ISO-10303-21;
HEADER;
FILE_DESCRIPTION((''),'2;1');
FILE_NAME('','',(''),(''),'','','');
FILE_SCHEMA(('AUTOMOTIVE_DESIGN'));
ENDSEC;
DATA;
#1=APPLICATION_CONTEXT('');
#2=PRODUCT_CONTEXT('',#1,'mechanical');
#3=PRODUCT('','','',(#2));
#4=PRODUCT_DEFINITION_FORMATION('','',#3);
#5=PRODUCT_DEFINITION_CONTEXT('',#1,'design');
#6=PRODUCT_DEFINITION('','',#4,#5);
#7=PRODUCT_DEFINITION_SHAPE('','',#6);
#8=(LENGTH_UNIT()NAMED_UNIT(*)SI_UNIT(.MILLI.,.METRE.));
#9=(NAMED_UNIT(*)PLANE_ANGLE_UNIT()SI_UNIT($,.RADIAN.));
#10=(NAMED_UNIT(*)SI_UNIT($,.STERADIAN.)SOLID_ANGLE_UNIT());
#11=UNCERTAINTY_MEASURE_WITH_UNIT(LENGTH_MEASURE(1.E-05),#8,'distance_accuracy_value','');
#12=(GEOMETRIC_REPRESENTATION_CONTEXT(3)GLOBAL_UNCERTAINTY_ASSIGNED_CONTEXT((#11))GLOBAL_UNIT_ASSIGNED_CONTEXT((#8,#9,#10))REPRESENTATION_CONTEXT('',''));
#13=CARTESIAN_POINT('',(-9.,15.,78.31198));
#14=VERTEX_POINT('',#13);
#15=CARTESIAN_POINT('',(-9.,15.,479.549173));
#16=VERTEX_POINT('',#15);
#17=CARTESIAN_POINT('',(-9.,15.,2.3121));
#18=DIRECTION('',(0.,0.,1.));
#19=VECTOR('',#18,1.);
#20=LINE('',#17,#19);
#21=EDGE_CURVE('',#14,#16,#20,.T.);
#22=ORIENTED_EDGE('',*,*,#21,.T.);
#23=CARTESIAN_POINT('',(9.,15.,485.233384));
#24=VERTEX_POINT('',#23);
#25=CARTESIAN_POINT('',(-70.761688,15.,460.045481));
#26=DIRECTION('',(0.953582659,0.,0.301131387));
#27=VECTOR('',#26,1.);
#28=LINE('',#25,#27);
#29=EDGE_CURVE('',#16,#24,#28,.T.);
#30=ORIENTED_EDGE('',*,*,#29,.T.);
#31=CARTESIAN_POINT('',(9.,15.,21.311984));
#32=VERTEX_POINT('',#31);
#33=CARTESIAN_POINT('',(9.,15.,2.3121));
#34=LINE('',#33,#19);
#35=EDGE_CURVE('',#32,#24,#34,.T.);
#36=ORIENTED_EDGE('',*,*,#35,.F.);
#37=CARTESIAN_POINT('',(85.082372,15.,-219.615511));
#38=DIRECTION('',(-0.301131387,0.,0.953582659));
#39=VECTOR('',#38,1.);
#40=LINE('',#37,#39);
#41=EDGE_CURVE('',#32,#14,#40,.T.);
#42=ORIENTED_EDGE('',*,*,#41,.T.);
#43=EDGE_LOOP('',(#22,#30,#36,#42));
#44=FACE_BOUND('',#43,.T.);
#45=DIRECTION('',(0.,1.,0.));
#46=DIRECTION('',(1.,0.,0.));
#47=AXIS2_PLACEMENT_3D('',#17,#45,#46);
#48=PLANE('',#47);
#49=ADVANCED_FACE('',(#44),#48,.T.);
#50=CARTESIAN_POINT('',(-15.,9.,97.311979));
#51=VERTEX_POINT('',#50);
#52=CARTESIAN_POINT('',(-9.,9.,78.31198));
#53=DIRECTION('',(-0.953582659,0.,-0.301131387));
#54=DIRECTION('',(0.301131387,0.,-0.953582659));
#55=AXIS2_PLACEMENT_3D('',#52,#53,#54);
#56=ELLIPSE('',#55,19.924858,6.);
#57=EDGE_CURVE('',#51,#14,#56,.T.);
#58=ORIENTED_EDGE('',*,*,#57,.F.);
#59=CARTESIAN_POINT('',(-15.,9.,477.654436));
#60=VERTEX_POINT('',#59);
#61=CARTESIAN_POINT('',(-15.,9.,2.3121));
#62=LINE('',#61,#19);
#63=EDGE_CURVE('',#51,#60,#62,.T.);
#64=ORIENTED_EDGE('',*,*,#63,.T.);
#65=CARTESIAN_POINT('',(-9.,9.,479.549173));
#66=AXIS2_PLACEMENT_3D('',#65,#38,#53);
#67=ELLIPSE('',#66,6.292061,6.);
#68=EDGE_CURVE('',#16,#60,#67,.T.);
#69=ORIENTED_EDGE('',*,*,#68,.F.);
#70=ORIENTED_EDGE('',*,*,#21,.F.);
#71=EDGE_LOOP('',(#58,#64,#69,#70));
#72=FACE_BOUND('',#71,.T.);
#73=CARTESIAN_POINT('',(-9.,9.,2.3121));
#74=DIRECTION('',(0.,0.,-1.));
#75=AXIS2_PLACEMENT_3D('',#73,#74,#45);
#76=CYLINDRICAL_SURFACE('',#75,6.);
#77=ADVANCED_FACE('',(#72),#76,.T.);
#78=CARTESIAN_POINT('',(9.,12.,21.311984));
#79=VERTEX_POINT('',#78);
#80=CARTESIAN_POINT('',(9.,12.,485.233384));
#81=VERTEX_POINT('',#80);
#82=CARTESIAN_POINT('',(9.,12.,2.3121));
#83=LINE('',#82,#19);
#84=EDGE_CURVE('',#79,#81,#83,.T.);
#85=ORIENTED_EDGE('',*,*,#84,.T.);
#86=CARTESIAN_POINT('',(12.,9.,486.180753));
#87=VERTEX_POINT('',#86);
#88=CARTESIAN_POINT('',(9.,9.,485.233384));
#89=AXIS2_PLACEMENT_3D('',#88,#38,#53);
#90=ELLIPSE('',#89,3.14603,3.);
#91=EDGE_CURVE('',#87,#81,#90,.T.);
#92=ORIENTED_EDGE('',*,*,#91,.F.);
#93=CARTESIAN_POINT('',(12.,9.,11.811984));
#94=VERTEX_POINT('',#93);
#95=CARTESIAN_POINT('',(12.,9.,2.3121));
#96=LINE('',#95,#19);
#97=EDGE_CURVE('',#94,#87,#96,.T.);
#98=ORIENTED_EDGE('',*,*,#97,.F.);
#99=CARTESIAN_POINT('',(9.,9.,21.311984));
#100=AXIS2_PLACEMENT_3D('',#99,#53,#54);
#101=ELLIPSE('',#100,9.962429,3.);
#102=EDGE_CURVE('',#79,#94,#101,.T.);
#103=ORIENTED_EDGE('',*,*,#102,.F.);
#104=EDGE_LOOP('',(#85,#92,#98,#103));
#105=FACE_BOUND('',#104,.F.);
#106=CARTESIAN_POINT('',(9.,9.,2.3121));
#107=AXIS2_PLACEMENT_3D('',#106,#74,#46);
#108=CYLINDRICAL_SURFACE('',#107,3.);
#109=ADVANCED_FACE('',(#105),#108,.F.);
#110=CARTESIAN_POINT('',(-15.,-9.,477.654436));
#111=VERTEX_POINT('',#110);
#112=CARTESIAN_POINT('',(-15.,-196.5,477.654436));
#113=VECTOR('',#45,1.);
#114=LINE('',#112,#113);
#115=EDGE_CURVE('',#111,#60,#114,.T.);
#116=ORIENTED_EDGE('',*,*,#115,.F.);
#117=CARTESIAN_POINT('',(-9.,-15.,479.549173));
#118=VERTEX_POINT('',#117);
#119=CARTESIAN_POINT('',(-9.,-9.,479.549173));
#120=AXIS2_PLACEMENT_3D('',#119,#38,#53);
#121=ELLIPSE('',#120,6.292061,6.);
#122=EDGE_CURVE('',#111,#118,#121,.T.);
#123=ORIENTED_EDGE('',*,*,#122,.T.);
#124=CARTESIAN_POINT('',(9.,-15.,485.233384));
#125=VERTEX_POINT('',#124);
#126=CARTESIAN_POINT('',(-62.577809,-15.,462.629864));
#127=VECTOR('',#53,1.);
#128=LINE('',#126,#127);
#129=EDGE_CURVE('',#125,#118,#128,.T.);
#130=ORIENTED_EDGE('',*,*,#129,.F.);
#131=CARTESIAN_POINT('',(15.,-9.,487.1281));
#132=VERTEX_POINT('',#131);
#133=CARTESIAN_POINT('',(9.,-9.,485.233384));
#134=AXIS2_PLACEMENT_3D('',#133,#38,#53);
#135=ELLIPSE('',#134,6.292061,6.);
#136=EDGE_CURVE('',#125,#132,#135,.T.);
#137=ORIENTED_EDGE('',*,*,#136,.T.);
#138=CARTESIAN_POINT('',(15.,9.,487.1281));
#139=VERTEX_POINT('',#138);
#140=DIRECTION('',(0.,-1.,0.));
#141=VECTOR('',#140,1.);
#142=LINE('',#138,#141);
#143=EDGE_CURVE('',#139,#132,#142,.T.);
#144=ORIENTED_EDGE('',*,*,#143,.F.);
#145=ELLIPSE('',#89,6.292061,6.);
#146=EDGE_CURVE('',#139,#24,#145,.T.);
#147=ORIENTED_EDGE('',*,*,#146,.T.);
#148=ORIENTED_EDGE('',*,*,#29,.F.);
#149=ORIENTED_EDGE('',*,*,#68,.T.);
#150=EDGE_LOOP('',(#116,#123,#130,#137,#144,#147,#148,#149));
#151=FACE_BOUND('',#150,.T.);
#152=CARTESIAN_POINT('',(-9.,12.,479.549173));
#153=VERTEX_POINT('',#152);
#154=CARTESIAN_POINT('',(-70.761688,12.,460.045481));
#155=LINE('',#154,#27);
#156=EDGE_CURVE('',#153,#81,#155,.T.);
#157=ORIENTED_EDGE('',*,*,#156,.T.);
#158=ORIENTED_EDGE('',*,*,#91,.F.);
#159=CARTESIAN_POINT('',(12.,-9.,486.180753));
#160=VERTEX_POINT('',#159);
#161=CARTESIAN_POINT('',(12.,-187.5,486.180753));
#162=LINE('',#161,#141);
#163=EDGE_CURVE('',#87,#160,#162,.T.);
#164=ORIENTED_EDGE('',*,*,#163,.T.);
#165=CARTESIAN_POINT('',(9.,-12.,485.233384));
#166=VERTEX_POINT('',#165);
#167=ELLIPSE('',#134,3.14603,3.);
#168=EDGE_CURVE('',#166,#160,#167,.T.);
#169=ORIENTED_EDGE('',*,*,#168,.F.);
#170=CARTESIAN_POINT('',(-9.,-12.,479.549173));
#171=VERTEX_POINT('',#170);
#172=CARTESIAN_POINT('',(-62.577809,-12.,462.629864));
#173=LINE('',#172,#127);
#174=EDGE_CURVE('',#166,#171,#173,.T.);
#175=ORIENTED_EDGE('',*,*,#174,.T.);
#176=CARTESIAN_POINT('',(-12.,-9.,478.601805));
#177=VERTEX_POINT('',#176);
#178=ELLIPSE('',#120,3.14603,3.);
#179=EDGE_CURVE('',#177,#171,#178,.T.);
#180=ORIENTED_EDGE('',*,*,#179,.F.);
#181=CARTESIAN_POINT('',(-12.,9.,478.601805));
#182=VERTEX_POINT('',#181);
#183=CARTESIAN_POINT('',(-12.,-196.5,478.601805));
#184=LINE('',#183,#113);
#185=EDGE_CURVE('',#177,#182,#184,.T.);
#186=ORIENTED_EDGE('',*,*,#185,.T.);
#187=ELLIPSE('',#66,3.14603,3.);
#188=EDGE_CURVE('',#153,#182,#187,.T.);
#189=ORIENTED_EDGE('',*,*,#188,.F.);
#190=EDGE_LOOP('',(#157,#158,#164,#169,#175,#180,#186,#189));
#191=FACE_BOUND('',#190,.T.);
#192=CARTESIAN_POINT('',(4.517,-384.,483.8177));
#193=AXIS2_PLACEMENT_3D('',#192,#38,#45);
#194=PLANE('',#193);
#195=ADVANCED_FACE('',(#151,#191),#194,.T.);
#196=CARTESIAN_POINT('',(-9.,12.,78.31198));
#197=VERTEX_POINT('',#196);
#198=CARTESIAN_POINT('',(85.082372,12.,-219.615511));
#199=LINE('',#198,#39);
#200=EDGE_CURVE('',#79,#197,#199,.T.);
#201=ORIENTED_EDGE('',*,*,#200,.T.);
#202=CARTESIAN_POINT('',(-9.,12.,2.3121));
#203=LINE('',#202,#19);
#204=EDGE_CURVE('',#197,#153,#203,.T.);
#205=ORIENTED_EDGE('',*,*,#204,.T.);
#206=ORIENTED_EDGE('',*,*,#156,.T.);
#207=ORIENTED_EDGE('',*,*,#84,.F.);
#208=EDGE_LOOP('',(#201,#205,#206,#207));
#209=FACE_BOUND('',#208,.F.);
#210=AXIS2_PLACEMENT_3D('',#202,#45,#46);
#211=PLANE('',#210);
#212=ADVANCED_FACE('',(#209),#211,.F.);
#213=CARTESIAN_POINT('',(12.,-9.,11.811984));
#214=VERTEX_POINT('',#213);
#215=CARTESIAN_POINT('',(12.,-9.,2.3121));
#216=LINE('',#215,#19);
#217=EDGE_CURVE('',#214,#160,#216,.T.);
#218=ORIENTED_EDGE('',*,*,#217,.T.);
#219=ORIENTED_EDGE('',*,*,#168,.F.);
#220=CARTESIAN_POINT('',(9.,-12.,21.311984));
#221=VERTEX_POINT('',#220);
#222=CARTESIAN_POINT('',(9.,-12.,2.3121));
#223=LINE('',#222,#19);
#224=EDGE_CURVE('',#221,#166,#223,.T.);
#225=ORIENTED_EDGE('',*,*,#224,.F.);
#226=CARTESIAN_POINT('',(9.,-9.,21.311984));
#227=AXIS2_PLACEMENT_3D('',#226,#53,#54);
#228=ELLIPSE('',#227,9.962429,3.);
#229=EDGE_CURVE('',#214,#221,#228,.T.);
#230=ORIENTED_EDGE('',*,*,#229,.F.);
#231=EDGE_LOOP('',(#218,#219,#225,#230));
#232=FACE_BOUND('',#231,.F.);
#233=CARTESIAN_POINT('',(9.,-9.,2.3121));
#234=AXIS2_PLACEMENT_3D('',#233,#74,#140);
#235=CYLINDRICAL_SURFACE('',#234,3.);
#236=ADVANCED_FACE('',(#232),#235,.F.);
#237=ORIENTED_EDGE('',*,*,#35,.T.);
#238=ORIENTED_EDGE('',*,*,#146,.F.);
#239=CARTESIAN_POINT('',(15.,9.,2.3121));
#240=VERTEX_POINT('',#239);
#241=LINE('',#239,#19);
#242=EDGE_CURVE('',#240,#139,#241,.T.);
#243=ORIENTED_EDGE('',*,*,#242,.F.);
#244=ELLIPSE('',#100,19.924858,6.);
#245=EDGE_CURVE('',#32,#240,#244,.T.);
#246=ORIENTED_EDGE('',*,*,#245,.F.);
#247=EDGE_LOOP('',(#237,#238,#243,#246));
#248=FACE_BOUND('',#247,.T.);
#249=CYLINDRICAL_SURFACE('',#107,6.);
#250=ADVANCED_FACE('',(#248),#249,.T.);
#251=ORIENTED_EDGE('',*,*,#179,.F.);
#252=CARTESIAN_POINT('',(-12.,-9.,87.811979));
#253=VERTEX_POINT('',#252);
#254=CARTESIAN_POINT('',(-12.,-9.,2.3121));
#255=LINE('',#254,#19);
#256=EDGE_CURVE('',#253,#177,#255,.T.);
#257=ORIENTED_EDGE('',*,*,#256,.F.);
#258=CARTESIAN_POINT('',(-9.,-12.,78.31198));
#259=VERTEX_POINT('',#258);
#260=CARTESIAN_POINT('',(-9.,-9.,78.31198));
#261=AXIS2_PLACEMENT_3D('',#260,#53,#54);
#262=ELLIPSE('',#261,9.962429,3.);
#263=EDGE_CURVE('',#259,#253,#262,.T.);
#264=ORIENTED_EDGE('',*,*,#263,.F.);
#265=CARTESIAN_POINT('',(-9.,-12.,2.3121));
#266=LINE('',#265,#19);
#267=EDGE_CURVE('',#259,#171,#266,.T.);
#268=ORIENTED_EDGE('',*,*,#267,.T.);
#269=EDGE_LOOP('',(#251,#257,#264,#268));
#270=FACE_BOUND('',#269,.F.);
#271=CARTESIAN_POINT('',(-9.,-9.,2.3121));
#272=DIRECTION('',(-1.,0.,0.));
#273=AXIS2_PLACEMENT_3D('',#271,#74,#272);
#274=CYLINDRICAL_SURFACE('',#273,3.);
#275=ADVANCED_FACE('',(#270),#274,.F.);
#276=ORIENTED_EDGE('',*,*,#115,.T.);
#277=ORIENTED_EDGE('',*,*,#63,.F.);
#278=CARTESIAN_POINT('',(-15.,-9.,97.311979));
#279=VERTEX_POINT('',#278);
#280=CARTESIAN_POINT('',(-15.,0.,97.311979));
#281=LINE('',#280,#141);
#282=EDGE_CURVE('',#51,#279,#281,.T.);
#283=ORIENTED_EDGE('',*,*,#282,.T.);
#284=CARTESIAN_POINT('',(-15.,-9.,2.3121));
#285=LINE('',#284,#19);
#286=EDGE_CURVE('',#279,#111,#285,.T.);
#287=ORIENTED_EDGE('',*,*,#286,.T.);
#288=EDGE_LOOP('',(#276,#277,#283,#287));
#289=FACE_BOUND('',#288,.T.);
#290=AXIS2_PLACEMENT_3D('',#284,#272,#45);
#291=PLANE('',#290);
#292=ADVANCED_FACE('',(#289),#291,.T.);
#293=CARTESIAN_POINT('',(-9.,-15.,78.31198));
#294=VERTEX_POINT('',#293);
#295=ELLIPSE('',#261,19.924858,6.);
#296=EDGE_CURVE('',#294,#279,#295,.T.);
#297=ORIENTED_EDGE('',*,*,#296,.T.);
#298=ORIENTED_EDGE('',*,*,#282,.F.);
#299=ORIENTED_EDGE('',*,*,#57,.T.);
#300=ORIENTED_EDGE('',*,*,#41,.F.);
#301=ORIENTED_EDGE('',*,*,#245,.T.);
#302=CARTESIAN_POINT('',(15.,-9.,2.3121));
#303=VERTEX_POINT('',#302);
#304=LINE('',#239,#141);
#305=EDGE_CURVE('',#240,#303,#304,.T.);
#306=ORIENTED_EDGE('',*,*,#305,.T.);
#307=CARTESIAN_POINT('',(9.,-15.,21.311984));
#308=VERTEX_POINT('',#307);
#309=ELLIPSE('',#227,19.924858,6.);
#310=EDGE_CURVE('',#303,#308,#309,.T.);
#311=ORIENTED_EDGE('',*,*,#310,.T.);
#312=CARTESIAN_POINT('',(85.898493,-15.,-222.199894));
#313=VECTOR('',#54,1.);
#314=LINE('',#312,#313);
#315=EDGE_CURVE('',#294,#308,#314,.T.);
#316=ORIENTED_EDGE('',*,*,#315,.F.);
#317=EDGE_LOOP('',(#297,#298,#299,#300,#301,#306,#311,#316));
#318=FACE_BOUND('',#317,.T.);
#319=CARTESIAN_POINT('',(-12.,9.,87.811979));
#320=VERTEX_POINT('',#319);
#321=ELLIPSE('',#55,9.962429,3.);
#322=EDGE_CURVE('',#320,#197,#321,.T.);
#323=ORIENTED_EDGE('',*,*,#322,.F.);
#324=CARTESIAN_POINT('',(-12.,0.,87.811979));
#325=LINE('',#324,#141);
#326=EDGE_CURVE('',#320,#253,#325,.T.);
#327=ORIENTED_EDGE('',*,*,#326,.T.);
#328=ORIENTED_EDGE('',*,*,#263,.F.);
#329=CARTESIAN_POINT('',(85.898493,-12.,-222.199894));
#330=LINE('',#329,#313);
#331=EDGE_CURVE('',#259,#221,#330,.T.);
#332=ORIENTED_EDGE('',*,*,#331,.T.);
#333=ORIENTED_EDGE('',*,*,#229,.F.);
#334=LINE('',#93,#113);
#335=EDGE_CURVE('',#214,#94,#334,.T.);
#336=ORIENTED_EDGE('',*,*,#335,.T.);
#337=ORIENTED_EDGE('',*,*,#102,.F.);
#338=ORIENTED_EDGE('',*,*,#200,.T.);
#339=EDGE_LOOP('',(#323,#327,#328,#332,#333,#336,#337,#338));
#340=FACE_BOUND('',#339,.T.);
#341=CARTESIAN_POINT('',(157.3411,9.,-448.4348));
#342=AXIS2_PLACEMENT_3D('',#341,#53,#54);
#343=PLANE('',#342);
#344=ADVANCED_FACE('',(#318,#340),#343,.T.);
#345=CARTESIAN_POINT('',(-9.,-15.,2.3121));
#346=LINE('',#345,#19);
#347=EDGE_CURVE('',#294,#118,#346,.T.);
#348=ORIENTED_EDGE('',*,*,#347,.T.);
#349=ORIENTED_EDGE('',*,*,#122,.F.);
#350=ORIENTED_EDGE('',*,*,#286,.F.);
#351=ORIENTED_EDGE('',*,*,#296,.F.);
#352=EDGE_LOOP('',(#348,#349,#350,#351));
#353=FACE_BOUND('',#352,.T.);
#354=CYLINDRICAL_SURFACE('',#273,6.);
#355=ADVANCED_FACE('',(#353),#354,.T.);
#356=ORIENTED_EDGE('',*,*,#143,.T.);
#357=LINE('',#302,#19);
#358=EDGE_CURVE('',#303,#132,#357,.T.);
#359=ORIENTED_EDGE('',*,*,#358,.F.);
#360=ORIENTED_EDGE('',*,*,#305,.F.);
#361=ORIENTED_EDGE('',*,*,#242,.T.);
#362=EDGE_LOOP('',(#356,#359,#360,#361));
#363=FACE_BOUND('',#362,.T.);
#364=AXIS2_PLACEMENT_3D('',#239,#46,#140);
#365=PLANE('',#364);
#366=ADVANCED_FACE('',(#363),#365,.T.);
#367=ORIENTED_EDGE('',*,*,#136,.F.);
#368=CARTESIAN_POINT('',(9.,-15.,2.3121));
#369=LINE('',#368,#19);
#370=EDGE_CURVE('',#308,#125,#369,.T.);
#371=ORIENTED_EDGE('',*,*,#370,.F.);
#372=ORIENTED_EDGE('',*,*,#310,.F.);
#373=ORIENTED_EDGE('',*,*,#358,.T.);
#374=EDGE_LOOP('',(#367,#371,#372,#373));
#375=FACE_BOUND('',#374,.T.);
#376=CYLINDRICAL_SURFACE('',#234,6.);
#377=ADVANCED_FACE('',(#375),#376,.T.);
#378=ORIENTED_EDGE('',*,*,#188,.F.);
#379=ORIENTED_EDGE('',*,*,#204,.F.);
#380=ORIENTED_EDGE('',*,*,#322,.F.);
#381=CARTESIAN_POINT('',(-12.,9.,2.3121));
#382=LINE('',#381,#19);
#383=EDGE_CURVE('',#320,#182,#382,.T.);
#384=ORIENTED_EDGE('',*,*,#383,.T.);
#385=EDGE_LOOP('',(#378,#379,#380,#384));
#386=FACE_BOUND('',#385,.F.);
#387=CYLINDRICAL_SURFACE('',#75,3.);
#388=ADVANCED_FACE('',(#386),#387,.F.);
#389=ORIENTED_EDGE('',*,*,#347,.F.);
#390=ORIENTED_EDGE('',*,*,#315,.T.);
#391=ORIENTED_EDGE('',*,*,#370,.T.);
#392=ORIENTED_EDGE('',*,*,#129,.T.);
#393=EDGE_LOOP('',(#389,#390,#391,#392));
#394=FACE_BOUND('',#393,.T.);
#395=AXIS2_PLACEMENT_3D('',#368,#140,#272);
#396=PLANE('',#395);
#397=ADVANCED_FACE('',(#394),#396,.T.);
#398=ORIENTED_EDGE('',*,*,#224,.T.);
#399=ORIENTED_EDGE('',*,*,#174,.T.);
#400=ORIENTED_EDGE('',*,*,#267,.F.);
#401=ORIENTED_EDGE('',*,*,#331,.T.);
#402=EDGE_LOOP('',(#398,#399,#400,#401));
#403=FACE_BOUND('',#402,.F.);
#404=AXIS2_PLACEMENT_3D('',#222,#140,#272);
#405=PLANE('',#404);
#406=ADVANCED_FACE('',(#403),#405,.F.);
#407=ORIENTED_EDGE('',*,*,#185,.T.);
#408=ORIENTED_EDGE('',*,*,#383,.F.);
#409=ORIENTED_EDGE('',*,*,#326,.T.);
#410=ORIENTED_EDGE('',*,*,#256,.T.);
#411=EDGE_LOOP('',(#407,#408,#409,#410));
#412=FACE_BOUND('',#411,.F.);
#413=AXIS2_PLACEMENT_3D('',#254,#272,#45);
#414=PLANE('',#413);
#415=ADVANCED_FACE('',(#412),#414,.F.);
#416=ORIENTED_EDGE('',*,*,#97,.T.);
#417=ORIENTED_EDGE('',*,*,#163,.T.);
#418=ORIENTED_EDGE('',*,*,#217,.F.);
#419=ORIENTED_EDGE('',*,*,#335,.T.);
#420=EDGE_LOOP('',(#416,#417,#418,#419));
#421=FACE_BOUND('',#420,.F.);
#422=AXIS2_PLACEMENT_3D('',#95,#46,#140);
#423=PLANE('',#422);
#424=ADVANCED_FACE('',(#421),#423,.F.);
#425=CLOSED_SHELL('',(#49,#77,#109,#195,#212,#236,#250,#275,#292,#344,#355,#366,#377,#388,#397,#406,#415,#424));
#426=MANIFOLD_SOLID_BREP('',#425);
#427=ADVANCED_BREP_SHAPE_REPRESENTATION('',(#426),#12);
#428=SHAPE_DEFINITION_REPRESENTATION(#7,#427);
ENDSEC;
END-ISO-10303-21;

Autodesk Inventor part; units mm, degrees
ref_plane "Start Plane" through (0, 0, 2.3121) normal (0, 0, 1) x (1, 0, 0)
ref_plane "End Plane" through (0, 0, 487.1282) normal (0, 0, 1) x (1, 0, 0)
sketch "Sketch" plane through (0, 0, 0) normal (0, 0, 1) x (1, 0, 0)
  line L0 (-15, -9) -> (-15, 9)
  line L1 (-9, 15) -> (9, 15)
  line L2 (15, 9) -> (15, -9)
  line L3 (9, -15) -> (-9, -15)
  arc A0 (-15, -9) -> (-9, -15) centre (-9, -9) ccw
  arc A1 (-9, 15) -> (-15, 9) centre (-9, 9) ccw
  arc A2 (15, 9) -> (9, 15) centre (9, 9) ccw
  arc A3 (9, -15) -> (15, -9) centre (9, -9) ccw
  arc A4 (-9, 12) -> (-12, 9) centre (-9, 9) ccw
  line L4 (-9, 12) -> (9, 12)
  arc A5 (12, 9) -> (9, 12) centre (9, 9) ccw
  line L5 (12, 9) -> (12, -9)
  arc A6 (9, -12) -> (12, -9) centre (9, -9) ccw
  line L6 (9, -12) -> (-9, -12)
  arc A7 (-12, -9) -> (-9, -12) centre (-9, -9) ccw
  line L7 (-12, -9) -> (-12, 9)
  line L8 (0, 22.7397) -> (0, -22.7397) construction
  line L9 (-22.7397, 0) -> (22.7397, 0) construction
  dimension "d7" = 6
  dimension "d10" = 30
  dimension "d11" = 30
  dimension "d12" = 3
  dimension "d15" = 15
  dimension "d16" = 15
extrude "Body" add sketch "Sketch" along normal up to surface (484.816 mm away) from surface at 2.3121
sketch "Sketch3" plane through (0, 0, 0) normal (0, 0, 1) x (1, 0, 0)
  line L0 (0, 0) -> (10, 0)
ref_plane "Work Plane3" through (0, 0, 0) normal (0, -1, 0) x (1, 0, 0)
ref_plane "Work Plane4" through (4.517, -384, 483.8177) normal (-0.3011314, 0, 0.9535827) x (0.9535827, 0, 0.3011314)
split "Split1" plane through (4.517, -384, 483.8177) removes the side toward (-0.3011314, 0, 0.9535827)
ref_plane "Work Plane5" through (157.3411, 9, -448.4348) normal (-0.9535827, 0, -0.3011314) x (-0.3011314, 0, 0.9535827)
split "Split2" plane through (157.3411, 9, -448.4348) removes the side toward (-0.9535827, 0, -0.3011314)
sketch "Sketch4" plane through (0, 0, 0) normal (0, -1, 0) x (1, 0, 0)
  line L0 (-2, 2.3121) -> (12, 2.3121) projected
  line L1 (-2, 487.1282) -> (12, 487.1282) projected
  dimension "d18" = 484.816
equation "\"d7\" = G_IR"
equation "\"d10\" = G_H"
equation "\"d11\" = G_W"
equation "\"d12\" = G_T"
equation "\"d15\" = 0.5 * d10"
equation "\"d16\" = 0.5 * d11"
equation "\"d3\" = G_L"
equation "\"G_W\" = 30"
equation "\"G_H\" = 30"
equation "\"G_T\" = 3"
equation "\"G_IR\" = 6"
equation "\"G_L\" = d18"
equation "\"G_OFFSET_START\" = -2.31215"
equation "\"G_OFFSET_END\" = -10.99331"
equation "\"d13\" = -G_OFFSET_START"
equation "\"d14\" = G_OFFSET_END + B_L"
equation "\"B_L\" = 498.12147"
properties part number "DIN EN 10219-2 - 30 x 30 x 3  - 484.82" material "Steel, Mild"
